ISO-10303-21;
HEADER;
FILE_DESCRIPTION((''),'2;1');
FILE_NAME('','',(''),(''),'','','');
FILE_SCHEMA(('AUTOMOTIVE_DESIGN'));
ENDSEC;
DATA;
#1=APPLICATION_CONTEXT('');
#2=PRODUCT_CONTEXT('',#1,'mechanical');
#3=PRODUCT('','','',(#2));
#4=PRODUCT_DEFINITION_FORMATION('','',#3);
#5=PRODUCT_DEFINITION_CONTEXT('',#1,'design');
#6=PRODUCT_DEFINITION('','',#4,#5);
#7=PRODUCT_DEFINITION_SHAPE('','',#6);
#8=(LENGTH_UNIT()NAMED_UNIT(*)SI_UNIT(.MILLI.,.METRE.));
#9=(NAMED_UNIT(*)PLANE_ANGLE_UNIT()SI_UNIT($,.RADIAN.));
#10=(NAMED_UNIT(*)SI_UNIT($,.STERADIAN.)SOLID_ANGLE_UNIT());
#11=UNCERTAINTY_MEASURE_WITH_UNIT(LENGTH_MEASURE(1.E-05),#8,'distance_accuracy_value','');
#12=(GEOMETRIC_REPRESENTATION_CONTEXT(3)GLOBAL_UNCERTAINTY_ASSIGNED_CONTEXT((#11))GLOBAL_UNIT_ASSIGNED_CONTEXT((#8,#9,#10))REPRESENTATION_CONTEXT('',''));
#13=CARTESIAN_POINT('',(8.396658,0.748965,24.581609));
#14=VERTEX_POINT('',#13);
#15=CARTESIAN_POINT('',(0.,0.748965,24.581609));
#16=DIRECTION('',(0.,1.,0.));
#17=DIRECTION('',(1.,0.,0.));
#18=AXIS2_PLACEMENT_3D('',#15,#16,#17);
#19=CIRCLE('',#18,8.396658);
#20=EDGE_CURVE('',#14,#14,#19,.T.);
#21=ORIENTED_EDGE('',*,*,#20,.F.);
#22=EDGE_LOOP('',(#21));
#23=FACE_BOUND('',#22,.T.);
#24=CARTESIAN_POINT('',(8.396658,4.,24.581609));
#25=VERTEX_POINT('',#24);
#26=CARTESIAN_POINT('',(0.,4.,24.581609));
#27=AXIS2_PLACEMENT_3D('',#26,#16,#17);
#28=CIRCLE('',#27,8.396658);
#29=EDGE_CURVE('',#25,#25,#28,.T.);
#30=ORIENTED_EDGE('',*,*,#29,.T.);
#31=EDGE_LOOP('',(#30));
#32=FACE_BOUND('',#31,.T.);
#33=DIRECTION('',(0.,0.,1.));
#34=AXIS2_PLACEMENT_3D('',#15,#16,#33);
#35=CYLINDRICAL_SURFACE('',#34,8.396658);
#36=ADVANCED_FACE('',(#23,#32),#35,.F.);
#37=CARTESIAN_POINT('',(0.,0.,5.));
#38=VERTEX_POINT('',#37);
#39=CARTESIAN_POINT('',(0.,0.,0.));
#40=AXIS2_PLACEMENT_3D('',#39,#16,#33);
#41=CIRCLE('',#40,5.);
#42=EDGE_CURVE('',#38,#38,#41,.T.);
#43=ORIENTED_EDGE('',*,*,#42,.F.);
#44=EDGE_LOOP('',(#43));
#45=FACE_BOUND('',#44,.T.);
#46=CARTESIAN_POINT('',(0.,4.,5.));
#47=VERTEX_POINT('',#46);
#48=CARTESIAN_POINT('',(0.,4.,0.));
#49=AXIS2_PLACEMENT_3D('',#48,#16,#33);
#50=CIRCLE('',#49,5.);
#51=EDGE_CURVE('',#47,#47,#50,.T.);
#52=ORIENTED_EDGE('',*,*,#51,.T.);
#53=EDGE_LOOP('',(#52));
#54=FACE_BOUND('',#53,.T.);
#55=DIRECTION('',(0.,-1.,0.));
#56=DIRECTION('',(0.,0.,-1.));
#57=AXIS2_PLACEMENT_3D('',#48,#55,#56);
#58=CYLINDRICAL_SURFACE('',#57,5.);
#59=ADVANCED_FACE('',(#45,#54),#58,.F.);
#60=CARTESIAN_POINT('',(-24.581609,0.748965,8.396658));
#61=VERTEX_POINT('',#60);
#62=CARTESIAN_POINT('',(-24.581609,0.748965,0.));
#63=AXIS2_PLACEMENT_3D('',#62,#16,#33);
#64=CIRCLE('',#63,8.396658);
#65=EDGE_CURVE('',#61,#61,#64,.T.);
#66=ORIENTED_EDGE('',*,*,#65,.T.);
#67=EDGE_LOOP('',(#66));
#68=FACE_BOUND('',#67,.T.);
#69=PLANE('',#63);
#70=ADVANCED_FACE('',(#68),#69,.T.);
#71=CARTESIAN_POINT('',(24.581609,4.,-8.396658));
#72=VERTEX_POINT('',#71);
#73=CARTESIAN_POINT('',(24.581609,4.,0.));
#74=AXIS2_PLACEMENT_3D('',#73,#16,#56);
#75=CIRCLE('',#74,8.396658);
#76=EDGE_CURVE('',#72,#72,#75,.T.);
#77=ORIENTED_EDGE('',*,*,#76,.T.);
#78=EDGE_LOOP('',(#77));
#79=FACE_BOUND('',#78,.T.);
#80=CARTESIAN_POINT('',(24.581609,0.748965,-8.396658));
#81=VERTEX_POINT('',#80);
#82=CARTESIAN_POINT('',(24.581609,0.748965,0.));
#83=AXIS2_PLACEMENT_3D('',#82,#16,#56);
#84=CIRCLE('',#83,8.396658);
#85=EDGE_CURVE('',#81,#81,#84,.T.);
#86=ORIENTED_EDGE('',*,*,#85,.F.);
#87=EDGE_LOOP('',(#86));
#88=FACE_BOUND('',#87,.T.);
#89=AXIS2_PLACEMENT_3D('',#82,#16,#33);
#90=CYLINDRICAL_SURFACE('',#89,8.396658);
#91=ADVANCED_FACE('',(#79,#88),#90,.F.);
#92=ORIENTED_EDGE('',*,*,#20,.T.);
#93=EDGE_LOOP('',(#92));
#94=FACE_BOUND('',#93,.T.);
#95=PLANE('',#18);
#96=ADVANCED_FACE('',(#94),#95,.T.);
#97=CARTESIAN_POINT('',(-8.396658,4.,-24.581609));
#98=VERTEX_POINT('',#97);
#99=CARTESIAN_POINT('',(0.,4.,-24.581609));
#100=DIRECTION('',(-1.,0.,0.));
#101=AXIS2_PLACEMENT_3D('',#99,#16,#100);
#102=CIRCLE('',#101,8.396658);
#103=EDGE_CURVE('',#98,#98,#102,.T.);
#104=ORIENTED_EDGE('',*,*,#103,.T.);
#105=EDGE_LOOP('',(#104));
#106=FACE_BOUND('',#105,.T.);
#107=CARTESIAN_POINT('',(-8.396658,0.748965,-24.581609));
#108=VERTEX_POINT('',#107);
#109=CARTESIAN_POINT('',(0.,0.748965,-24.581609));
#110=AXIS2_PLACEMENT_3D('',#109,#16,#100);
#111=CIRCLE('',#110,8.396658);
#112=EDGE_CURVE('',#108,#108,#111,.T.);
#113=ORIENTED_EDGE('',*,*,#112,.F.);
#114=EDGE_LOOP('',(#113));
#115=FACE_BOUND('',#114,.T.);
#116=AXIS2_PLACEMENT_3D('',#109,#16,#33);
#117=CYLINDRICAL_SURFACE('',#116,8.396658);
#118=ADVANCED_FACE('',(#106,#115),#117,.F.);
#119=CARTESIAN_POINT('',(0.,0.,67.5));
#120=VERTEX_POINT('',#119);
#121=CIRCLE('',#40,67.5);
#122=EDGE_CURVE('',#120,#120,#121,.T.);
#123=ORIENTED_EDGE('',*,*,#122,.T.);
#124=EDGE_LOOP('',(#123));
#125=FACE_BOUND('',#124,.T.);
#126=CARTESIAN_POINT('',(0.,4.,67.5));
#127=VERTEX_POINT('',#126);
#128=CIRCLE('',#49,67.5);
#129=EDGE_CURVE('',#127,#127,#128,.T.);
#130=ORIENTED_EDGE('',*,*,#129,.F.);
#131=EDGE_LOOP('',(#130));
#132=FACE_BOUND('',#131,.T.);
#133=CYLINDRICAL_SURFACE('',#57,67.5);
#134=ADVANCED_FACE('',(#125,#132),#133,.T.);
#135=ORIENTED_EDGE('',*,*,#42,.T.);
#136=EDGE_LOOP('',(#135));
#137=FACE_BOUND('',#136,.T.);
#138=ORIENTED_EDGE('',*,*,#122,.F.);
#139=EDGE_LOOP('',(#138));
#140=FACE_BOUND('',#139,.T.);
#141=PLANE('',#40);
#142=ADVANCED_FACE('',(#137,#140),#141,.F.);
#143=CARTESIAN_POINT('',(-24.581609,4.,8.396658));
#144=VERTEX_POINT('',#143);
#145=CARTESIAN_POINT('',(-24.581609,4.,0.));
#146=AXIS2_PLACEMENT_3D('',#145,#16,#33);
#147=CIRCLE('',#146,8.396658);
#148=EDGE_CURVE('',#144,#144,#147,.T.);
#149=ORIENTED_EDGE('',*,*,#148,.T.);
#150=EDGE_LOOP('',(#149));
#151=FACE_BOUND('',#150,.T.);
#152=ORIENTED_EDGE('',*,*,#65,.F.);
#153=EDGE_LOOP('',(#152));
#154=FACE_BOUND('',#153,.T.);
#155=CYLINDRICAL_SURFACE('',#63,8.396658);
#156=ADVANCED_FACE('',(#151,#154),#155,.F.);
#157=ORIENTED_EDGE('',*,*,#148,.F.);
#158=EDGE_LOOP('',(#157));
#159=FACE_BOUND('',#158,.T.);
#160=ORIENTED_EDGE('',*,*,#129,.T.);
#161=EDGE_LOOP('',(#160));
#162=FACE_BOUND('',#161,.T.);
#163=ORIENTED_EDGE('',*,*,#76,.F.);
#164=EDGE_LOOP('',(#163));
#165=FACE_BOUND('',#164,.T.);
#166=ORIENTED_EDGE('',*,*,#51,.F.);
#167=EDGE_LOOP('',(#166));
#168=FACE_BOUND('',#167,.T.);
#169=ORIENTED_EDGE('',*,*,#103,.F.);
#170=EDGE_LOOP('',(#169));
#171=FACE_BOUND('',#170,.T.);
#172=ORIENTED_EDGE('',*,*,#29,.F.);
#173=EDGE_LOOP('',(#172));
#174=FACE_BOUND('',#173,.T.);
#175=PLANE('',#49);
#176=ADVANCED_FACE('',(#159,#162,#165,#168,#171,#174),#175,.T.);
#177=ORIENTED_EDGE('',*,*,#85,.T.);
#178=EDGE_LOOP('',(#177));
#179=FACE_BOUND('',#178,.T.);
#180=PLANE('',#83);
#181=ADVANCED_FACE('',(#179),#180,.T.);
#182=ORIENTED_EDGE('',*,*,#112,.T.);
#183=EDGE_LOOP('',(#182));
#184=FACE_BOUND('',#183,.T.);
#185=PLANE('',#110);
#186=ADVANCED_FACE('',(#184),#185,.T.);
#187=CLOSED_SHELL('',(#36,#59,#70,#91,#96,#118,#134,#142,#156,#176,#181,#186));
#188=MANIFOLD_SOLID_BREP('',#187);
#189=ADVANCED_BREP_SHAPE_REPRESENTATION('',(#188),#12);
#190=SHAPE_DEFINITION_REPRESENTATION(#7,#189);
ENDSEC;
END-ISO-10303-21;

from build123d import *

# Parameters (mm, degrees)
SKETCH1_R           = 67.5
BOSS_EXTRUDE1_DEPTH = 4
SKETCH2_R           = 5
CUT_EXTRUDE1_DEPTH  = 96.543183954
SKETCH3_R           = 8.396657558
CUT_EXTRUDE2_DEPTH  = 3.251035198
CIRPATTERN1_COUNT   = 4


with BuildPart() as part:
    # Sketch1 → Boss-Extrude1 (new body)
    with BuildSketch(Plane(origin=(0, 0, 0), x_dir=(1, 0, 0), z_dir=(0, 1, 0))):
        Circle(SKETCH1_R)
    extrude(amount=BOSS_EXTRUDE1_DEPTH)

    # Sketch2 → Cut-Extrude1 (cut, through all)
    with BuildSketch(Plane(origin=(0, 0, 0), x_dir=(1, 0, 0), z_dir=(0, 1, 0))):
        Circle(SKETCH2_R)
    extrude(amount=CUT_EXTRUDE1_DEPTH, mode=Mode.SUBTRACT)

    # Sketch3 → Cut-Extrude2 (cut)
    with BuildSketch(Plane(origin=(0, 4, 0), x_dir=(1, 0, 0), z_dir=(0, 1, 0))):
        with Locations((-24.58160914, 0)):
            Circle(SKETCH3_R)
    cut_extrude2 = extrude(amount=-CUT_EXTRUDE2_DEPTH, mode=Mode.SUBTRACT)

    # CirPattern1: Cut-Extrude2 ×4 about axis
    cirpattern1_axis = Axis((0, 0, 0), (0, 1, 0))
    for i in range(1, CIRPATTERN1_COUNT):
        add(cut_extrude2.rotate(cirpattern1_axis, i * 360 / CIRPATTERN1_COUNT), mode=Mode.SUBTRACT)


solid = part.part
